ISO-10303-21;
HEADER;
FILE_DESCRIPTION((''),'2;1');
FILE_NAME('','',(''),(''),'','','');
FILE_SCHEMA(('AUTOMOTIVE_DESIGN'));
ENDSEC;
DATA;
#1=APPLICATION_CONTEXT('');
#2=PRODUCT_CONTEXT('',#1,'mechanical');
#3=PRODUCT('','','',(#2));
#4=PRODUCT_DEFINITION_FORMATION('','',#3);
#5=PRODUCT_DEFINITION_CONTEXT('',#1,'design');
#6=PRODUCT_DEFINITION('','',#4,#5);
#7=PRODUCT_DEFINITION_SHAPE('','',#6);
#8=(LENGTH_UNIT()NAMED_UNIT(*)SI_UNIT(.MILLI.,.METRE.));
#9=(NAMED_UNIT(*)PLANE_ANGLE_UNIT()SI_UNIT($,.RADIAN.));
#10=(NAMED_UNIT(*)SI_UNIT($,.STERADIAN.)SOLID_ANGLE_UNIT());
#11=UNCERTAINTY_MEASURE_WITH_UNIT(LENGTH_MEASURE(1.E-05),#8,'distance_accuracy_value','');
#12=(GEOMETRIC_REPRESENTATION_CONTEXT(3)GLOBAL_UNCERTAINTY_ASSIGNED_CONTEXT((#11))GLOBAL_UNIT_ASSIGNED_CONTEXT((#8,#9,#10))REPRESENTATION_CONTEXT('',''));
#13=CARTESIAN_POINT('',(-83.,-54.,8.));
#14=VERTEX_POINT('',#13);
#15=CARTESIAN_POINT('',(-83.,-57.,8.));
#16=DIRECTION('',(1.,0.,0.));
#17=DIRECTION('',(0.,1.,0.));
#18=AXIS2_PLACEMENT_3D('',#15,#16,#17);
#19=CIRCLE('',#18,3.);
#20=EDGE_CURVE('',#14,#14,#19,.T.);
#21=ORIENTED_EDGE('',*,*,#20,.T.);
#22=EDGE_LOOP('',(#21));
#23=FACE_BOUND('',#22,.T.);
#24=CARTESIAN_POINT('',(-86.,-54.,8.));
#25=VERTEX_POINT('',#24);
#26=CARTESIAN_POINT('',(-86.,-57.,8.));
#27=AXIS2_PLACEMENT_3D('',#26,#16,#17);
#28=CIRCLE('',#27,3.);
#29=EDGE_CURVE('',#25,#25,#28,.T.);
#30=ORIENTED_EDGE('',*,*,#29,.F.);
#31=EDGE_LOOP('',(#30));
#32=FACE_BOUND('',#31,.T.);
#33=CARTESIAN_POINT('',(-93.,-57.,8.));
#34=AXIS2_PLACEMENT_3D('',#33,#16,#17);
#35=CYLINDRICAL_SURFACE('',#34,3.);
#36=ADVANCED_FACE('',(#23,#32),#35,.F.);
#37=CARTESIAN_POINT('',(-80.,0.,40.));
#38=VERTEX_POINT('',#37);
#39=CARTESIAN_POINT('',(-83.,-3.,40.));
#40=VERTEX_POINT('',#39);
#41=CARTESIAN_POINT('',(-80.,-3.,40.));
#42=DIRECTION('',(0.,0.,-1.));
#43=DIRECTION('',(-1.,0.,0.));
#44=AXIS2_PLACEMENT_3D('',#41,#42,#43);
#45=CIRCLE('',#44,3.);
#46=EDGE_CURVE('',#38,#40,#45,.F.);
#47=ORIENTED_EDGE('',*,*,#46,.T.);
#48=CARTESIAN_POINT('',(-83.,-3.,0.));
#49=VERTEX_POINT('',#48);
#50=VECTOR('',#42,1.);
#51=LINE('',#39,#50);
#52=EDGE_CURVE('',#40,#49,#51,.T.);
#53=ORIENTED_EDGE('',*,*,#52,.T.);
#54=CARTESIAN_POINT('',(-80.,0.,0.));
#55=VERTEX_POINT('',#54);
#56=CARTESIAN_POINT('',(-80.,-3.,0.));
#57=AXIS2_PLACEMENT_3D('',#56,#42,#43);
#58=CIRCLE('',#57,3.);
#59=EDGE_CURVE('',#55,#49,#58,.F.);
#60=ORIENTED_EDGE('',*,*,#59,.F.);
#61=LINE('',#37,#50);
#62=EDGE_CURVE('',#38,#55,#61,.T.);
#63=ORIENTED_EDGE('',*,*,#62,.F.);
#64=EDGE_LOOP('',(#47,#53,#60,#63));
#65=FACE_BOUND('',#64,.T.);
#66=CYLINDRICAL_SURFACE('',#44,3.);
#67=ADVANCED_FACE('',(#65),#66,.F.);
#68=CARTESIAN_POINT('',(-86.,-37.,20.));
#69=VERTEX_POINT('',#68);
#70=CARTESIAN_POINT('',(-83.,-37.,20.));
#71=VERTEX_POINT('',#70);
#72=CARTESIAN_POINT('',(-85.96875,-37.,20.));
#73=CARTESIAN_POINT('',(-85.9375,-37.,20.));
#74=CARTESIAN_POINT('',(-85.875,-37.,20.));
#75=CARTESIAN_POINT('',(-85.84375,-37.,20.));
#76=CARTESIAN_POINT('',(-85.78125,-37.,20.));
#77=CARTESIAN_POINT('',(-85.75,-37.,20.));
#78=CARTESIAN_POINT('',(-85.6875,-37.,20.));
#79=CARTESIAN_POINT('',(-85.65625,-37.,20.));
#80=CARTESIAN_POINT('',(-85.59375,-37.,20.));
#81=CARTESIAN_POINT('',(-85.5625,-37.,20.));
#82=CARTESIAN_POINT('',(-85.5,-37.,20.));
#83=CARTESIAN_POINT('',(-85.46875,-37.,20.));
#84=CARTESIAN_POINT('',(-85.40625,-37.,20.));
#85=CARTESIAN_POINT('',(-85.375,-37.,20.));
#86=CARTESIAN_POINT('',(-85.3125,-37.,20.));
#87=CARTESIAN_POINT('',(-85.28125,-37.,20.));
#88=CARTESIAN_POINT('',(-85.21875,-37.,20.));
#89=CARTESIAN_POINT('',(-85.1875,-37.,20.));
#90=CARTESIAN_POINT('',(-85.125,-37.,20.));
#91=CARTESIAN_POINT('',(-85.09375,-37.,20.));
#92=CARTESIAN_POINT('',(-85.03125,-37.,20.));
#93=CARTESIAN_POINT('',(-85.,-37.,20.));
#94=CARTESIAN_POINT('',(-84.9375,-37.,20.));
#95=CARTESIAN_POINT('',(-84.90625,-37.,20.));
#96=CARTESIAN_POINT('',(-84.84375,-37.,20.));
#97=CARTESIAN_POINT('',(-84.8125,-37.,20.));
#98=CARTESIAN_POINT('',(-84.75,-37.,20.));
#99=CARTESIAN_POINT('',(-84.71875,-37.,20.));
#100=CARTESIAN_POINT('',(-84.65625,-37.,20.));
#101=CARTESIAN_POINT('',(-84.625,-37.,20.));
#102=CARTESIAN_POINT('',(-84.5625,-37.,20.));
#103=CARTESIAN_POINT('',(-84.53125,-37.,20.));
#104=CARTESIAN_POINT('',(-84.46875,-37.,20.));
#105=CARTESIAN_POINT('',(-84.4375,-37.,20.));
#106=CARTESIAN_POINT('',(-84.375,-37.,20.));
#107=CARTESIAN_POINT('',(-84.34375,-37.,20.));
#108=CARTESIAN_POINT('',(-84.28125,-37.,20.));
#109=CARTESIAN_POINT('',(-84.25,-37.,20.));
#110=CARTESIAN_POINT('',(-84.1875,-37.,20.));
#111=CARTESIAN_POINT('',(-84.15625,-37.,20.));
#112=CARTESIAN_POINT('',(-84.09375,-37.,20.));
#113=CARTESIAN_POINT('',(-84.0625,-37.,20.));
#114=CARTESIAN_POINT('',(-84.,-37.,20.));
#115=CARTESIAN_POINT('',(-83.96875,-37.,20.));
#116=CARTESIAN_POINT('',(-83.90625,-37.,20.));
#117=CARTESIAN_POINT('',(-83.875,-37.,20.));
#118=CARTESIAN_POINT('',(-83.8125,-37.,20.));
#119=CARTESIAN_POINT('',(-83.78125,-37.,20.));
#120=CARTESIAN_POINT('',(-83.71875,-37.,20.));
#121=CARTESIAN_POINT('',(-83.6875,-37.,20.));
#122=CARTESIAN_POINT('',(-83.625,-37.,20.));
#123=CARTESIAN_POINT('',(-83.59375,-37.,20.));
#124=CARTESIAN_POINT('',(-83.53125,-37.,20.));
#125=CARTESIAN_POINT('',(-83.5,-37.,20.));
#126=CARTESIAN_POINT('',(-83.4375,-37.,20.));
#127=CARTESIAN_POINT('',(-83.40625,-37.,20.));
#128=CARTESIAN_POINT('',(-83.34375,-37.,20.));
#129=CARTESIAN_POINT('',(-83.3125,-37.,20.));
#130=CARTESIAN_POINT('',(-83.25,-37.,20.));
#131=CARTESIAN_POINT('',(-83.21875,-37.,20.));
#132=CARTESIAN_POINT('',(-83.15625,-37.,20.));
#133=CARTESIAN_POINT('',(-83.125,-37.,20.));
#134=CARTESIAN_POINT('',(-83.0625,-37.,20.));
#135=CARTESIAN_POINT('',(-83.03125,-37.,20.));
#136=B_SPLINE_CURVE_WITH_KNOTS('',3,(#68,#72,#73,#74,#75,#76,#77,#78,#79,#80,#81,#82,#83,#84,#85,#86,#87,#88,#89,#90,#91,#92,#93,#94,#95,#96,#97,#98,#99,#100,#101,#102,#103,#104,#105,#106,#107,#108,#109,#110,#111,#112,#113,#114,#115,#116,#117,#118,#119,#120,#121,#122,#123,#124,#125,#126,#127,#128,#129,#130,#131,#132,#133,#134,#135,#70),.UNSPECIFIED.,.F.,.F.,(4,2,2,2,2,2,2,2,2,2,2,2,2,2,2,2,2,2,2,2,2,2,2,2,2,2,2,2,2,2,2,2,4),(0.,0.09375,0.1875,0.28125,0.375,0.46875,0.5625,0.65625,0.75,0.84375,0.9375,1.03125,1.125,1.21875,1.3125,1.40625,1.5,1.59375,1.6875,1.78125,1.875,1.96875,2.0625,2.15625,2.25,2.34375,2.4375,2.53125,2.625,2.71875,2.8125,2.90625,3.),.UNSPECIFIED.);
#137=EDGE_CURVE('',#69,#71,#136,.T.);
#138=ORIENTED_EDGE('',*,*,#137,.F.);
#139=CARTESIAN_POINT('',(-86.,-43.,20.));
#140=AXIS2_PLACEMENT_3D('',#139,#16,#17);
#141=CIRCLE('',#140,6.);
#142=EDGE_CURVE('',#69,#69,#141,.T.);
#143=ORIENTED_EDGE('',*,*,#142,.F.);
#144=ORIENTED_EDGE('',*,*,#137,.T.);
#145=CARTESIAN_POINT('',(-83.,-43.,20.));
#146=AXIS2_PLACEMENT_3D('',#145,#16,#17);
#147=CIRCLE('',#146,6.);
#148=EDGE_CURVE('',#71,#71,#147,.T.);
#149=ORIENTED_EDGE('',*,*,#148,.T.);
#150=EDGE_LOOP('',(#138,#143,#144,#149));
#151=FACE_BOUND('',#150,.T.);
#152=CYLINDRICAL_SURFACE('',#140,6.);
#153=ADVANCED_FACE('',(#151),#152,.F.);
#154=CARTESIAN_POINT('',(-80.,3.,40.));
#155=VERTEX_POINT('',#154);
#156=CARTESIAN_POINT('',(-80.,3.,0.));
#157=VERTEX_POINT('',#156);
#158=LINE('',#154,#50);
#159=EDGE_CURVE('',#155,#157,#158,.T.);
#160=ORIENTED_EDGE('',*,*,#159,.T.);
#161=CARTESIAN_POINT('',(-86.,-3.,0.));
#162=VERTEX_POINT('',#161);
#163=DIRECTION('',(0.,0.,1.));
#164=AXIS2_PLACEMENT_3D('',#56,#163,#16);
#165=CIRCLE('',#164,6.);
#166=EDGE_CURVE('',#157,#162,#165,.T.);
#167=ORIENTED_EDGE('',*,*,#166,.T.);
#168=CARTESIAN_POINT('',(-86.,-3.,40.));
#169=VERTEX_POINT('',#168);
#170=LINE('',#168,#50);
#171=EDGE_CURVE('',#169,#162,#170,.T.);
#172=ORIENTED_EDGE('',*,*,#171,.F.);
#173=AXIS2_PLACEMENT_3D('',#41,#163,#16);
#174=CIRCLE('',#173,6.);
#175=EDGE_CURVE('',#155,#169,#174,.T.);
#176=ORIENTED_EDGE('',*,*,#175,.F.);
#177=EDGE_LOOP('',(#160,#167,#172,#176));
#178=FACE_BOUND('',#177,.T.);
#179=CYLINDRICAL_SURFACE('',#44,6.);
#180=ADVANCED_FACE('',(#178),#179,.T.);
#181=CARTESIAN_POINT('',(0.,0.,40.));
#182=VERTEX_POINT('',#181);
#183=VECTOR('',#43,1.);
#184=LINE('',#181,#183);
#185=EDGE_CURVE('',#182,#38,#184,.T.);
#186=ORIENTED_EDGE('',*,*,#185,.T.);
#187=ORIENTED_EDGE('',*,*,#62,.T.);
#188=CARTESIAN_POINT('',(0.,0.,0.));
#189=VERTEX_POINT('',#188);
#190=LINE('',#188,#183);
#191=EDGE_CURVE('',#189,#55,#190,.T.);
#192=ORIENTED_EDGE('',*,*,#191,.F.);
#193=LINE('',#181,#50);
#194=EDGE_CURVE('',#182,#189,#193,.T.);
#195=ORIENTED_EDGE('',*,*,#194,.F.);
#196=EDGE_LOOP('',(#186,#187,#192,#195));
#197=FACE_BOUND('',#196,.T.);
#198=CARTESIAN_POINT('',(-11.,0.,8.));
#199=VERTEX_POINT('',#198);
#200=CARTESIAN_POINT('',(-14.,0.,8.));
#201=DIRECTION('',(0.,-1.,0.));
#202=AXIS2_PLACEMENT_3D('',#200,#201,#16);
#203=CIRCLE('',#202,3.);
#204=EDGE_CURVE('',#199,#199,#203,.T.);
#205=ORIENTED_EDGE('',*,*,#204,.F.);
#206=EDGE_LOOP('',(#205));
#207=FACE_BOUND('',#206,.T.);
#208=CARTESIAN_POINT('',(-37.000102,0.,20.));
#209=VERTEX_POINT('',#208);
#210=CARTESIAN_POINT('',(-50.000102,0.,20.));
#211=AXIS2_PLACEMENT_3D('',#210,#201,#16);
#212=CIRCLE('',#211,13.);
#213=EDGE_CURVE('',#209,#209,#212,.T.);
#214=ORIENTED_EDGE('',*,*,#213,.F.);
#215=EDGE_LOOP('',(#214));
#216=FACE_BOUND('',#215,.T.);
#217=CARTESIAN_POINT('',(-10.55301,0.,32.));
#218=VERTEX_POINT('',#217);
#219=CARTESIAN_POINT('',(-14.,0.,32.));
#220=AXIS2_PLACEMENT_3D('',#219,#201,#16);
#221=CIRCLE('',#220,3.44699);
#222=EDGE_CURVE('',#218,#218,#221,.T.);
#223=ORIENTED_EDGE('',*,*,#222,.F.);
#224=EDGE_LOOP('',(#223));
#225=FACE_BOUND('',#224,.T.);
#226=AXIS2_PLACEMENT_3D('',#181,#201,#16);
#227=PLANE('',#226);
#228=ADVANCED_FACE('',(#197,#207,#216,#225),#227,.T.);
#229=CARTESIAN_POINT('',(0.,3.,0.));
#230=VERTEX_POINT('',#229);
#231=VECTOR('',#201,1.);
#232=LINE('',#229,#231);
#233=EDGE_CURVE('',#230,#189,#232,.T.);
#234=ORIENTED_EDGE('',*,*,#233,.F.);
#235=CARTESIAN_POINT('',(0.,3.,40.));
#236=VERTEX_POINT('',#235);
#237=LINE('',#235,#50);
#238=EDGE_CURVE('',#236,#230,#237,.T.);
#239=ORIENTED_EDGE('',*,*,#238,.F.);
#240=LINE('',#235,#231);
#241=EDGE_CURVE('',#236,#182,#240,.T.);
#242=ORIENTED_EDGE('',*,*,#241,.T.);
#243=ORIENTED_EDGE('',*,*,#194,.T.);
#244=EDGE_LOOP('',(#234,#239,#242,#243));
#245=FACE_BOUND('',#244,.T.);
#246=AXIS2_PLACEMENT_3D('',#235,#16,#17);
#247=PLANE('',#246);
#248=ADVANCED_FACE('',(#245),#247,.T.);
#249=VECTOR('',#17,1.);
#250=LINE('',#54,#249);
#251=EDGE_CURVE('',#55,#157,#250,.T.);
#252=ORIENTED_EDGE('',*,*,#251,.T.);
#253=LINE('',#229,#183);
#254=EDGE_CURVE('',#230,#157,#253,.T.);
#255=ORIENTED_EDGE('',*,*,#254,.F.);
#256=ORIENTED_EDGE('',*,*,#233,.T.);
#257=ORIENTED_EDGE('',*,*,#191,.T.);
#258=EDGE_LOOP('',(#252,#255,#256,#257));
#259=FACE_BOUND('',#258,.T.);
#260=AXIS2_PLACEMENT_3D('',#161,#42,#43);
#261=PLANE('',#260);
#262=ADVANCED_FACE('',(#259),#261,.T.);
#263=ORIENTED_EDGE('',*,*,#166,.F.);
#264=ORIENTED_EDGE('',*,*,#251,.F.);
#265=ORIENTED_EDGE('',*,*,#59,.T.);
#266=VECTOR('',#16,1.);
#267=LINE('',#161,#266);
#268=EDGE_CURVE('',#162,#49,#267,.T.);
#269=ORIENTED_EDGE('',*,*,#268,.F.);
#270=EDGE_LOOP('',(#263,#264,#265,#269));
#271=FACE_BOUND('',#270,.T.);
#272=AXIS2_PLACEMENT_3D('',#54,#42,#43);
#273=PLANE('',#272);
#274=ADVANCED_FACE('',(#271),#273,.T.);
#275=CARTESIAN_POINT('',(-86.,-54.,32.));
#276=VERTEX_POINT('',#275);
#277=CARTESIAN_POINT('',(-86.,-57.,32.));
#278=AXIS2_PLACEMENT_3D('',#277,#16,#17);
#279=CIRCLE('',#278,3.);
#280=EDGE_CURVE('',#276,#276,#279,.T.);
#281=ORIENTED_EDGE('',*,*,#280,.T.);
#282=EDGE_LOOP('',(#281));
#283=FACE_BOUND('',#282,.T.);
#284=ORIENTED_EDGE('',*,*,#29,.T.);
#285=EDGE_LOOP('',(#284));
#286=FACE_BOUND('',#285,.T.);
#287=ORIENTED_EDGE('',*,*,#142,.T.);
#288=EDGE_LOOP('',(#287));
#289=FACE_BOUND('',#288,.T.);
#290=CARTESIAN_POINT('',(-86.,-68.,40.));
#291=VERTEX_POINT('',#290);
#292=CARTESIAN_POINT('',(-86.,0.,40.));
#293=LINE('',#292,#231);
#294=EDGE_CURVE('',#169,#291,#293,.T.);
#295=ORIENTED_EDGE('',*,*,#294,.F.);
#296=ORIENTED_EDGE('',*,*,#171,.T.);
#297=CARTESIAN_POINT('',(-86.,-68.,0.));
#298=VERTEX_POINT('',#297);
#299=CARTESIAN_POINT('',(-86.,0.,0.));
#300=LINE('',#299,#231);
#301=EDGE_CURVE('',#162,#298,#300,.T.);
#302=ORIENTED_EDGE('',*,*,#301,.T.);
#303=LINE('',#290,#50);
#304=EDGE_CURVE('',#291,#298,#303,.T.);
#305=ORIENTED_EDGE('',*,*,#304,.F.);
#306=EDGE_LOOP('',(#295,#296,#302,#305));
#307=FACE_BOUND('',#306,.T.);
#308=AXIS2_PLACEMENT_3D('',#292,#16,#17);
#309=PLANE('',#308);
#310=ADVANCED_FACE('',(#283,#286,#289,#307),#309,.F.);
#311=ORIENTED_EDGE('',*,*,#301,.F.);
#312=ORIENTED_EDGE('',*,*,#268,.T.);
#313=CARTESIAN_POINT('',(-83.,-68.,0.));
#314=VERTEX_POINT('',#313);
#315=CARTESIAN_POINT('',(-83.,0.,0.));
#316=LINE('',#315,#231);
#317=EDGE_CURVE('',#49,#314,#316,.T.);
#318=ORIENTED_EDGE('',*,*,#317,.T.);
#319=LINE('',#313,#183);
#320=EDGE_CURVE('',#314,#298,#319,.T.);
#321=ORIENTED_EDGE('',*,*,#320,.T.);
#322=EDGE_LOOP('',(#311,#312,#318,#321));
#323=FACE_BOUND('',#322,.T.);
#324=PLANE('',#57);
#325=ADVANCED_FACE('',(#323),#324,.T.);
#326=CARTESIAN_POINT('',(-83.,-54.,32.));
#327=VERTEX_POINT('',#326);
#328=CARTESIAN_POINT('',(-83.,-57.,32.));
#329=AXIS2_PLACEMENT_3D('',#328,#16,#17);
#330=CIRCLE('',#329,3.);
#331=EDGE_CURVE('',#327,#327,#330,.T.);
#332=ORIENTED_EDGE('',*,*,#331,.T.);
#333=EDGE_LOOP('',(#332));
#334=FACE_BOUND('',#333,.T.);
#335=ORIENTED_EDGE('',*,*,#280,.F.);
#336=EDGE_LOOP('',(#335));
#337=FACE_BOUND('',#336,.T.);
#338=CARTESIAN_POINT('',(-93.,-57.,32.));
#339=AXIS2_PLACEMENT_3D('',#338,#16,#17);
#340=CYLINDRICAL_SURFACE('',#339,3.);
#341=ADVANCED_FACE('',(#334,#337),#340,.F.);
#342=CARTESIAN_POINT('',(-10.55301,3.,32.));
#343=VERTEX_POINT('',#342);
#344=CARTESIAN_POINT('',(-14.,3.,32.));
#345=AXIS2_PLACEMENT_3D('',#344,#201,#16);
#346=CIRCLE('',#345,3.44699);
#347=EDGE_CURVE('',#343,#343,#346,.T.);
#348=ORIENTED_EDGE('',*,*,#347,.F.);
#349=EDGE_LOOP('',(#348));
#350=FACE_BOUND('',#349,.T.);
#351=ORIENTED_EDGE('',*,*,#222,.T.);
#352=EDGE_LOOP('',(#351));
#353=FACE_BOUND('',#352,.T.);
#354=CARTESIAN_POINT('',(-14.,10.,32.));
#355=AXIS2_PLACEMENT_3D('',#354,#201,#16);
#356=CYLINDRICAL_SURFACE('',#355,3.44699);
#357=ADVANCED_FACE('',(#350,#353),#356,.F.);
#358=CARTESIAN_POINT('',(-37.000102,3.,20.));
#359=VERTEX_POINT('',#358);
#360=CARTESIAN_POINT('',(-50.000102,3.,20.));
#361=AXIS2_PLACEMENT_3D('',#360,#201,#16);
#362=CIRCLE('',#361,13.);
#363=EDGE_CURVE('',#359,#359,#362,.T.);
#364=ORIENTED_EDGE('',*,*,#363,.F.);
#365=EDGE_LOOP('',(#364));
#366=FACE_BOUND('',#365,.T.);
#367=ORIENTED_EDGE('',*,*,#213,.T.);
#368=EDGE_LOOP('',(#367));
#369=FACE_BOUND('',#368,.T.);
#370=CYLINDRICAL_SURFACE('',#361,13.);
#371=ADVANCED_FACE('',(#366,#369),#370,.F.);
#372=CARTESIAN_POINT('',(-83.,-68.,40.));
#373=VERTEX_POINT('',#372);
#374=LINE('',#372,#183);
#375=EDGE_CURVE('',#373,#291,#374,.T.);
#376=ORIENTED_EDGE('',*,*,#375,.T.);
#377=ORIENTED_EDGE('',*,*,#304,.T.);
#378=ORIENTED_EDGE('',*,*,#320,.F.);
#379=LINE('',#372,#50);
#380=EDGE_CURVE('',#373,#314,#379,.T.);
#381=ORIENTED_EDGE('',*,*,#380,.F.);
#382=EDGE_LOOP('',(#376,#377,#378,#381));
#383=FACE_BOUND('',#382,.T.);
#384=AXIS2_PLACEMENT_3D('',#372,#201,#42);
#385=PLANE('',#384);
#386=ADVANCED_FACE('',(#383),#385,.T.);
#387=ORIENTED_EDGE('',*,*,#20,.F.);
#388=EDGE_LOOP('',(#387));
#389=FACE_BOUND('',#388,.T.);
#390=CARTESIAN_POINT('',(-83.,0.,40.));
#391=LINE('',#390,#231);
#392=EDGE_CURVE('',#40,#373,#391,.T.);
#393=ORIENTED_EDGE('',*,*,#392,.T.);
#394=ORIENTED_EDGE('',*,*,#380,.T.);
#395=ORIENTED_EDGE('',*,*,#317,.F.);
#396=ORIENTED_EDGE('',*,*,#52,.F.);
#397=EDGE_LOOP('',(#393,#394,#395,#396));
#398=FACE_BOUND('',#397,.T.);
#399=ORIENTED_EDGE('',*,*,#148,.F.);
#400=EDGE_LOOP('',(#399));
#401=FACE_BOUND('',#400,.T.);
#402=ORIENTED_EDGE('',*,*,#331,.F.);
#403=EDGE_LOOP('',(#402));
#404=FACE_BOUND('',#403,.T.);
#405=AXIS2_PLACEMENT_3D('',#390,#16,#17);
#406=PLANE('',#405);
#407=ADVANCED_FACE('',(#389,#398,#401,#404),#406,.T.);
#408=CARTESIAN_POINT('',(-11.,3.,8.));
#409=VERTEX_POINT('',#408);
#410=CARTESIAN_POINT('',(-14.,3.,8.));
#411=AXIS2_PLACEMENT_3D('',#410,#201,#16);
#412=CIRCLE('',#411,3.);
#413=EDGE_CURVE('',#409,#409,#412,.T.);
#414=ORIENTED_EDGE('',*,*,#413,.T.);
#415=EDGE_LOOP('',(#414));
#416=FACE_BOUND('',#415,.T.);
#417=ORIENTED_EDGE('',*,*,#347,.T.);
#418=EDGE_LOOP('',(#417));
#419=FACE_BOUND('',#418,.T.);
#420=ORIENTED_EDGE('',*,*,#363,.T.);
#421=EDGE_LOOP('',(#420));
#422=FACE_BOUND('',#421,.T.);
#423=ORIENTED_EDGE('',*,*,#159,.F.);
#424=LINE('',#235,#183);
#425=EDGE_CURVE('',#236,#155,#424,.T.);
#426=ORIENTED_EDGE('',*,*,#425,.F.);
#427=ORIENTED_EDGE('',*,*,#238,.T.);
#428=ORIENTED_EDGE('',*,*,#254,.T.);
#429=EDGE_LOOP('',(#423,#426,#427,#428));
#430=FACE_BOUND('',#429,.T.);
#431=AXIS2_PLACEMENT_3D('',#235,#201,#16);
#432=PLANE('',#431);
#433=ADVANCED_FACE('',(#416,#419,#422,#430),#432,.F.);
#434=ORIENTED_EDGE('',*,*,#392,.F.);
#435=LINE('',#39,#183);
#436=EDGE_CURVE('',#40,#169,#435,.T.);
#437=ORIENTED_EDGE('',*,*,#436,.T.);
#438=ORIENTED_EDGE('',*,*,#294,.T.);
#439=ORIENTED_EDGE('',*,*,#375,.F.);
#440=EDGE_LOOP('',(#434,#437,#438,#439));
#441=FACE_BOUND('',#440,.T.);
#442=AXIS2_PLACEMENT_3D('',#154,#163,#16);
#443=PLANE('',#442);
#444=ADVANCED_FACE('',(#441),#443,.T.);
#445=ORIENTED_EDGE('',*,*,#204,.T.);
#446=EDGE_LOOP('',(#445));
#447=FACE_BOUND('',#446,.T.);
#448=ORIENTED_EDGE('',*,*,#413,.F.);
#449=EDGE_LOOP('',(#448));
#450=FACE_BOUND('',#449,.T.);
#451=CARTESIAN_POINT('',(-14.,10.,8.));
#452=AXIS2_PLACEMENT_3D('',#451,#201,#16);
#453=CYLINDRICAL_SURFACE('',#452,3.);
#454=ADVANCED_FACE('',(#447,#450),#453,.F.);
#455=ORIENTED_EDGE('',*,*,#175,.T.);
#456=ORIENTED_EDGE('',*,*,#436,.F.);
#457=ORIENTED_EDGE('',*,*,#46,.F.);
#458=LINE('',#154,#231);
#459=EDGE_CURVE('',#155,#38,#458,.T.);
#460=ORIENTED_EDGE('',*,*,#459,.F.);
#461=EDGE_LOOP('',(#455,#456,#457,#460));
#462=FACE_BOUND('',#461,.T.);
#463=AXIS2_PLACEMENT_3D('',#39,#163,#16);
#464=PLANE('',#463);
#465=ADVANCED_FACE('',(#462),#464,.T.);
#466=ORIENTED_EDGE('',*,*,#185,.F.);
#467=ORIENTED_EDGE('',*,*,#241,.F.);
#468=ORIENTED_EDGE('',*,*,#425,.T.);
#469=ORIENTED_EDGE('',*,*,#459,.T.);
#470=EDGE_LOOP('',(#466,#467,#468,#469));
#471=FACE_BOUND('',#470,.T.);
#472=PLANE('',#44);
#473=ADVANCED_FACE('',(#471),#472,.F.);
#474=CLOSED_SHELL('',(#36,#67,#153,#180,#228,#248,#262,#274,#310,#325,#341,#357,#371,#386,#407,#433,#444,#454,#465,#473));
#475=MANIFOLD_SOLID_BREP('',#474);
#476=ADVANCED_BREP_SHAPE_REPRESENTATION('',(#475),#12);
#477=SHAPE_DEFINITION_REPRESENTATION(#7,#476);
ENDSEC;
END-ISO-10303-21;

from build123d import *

# Parameters (mm, degrees)
BASE_FLANGE1_DEPTH = 40
SKETCH2_R          = 6
CUT_EXTRUDE1_DEPTH = 115.512008104
SKETCH3_R          = 13
CUT_EXTRUDE2_DEPTH = 117.704755687
SKETCH4_R          = 3
CUT_EXTRUDE3_DEPTH = 10
SKETCH5_R          = 3
SKETCH5_R_2        = 3.446989576
CUT_EXTRUDE4_DEPTH = 10


# Sheet-metal steps are written as plain solids
with BuildPart() as part:
    # Sketch1 → Base-Flange1 (new body)
    with BuildSketch(Plane.XY):
        with BuildLine():
            Line((0, 0), (-80, 0))
            ThreePointArc((-80, 0), (-82.121320344, -0.878679656), (-83, -3))
            Line((-83, -3), (-83, -68))
            Line((-83, -68), (-86, -68))
            Line((-86, -68), (-86, -3))
            ThreePointArc((-86, -3), (-84.242640687, 1.242640687), (-80, 3))
            Line((-80, 3), (0, 3))
            Line((0, 3), (0, 0))
        make_face()
    extrude(amount=BASE_FLANGE1_DEPTH)

    # Sketch2 → Cut-Extrude1 (cut, through all)
    with BuildSketch(Plane(origin=(-83, 0, 0), x_dir=(0, 0, -1), z_dir=(1, 0, 0))):
        with Locations(Location((-20, -43, 0), (0, 0, 90))):
            Circle(SKETCH2_R)
    extrude(amount=-CUT_EXTRUDE1_DEPTH, mode=Mode.SUBTRACT)

    # Sketch3 → Cut-Extrude2 (cut, through all)
    with BuildSketch(Plane.XZ):
        with Locations((-50.000101558, 20)):
            Circle(SKETCH3_R)
    extrude(amount=-CUT_EXTRUDE2_DEPTH, mode=Mode.SUBTRACT)

    # Sketch4 → Cut-Extrude3 (cut)
    with BuildSketch(Plane(origin=(-83, 0, 0), x_dir=(0, 0, -1), z_dir=(1, 0, 0))):
        with Locations(Location((-8, -57, 0), (0, 0, 90))):
            Circle(SKETCH4_R)
        with Locations(Location((-32, -57, 0), (0, 0, 90))):
            Circle(SKETCH4_R)
    extrude(amount=-CUT_EXTRUDE3_DEPTH, mode=Mode.SUBTRACT)

    # Sketch5 → Cut-Extrude4 (cut)
    with BuildSketch(Plane.XZ):
        with Locations((-14, 8)):
            Circle(SKETCH5_R)
        with Locations((-14, 32)):
            Circle(SKETCH5_R_2)
    extrude(amount=-CUT_EXTRUDE4_DEPTH, mode=Mode.SUBTRACT)


solid = part.part
